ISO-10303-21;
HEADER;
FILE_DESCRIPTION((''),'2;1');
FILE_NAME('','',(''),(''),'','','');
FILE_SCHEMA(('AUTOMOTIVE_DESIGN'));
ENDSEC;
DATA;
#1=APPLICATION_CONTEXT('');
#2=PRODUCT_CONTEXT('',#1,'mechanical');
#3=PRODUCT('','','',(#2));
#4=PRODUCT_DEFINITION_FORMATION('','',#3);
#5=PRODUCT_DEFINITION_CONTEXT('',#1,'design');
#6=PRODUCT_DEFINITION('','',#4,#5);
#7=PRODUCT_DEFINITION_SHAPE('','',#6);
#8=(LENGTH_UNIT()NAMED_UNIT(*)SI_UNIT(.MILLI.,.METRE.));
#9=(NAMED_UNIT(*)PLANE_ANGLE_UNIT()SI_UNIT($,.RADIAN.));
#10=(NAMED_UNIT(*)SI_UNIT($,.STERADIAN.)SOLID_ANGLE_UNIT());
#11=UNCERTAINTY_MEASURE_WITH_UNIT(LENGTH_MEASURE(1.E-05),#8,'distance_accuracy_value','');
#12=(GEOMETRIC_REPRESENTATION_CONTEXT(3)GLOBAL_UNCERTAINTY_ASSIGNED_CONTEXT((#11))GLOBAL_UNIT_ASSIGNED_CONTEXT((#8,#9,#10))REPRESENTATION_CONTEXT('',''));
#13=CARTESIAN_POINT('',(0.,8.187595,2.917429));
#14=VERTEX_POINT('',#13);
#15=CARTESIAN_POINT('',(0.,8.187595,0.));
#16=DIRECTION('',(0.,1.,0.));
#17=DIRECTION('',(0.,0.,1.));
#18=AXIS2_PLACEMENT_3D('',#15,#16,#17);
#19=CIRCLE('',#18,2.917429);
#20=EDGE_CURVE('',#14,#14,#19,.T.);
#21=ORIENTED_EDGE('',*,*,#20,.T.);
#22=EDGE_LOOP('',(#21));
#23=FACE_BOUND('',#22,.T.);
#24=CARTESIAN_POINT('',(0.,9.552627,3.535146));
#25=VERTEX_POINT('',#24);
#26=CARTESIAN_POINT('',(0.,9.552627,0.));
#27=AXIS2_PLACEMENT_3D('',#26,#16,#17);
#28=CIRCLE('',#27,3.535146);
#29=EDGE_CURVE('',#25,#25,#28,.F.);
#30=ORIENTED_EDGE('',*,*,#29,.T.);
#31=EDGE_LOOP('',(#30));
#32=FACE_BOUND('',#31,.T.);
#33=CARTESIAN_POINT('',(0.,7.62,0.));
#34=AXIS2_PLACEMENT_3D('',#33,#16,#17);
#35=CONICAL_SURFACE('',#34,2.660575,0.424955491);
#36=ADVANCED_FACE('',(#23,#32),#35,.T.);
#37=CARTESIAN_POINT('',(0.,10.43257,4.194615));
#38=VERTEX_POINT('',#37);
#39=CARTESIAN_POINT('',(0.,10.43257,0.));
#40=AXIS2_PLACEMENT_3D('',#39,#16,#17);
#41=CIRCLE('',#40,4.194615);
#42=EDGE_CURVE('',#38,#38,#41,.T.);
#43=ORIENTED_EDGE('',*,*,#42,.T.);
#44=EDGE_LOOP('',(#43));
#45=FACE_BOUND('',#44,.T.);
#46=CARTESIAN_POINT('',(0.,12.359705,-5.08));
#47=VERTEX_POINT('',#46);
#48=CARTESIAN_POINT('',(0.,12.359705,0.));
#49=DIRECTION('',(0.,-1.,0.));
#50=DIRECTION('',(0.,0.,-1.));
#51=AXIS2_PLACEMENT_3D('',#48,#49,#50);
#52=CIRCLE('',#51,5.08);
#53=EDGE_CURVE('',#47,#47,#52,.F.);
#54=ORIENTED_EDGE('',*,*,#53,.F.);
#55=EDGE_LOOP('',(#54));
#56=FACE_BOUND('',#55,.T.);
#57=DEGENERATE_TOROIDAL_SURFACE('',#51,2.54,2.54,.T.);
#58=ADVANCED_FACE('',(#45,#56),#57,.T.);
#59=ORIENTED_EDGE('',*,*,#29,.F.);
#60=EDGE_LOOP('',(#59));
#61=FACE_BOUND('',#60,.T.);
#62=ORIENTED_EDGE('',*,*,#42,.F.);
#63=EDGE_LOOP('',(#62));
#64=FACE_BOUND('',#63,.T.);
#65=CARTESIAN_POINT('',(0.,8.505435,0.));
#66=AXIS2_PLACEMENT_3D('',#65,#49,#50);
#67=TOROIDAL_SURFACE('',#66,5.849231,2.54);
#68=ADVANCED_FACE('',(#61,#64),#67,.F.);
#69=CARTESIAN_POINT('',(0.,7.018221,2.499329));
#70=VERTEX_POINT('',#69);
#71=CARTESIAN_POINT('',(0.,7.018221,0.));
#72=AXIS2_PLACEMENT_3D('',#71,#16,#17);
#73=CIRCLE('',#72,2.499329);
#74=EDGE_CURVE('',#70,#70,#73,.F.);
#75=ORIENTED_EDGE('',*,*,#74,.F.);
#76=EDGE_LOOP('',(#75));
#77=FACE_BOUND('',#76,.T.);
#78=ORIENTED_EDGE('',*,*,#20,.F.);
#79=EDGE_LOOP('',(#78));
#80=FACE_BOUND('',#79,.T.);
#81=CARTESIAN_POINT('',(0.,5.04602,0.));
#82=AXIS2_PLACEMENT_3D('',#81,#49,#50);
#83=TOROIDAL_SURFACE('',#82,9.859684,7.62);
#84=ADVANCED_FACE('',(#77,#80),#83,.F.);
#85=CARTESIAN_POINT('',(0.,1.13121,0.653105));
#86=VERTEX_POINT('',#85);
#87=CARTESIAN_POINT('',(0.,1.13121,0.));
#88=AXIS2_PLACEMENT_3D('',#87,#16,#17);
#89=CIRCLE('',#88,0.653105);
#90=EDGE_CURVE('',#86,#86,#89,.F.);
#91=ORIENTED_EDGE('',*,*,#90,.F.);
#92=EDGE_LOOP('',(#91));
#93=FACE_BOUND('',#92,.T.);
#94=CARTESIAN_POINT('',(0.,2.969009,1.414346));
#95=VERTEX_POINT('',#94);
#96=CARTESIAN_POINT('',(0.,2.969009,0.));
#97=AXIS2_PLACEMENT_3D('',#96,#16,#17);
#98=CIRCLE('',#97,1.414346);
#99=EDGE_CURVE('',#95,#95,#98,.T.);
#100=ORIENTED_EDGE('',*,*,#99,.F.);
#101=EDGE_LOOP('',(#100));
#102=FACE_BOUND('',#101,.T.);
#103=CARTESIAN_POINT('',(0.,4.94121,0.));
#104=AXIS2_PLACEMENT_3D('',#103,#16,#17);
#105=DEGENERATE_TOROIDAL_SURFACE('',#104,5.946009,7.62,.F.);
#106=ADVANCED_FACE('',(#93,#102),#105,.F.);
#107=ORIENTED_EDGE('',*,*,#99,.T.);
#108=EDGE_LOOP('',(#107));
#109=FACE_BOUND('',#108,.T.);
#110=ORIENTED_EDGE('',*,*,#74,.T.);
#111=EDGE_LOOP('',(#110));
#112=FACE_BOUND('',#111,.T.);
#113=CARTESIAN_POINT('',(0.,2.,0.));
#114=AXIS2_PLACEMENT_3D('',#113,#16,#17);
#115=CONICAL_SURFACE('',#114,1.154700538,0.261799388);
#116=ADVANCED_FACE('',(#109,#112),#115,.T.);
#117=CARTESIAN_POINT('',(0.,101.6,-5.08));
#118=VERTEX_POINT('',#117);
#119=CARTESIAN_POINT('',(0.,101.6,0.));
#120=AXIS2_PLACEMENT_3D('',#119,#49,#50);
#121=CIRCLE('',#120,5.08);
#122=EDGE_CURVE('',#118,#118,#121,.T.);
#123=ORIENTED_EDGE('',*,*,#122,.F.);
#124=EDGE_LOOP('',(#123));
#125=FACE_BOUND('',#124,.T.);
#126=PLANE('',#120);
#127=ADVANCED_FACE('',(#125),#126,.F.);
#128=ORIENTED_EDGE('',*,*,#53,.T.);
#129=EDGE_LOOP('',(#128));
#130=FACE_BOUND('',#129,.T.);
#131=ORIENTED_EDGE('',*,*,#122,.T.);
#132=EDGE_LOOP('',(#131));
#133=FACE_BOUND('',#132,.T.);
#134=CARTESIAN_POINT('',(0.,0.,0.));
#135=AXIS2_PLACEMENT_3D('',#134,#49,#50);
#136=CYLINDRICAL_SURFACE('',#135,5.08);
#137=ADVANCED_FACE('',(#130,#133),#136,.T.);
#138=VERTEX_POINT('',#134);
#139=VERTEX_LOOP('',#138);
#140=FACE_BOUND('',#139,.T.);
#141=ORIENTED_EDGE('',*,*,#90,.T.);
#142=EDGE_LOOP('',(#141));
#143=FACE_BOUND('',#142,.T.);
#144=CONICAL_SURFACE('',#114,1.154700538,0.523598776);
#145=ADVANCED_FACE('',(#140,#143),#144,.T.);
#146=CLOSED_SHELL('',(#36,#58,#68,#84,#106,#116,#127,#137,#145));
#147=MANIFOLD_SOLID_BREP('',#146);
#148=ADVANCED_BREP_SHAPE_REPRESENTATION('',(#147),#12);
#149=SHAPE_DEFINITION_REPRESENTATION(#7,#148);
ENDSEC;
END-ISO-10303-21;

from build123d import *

# Parameters (mm, degrees)
FILLET1_R = 2.54
FILLET2_R = 2.54
FILLET3_R = 7.62


with BuildPart() as part:
    # Sketch1 → Revolve1 (revolve)
    with BuildSketch(Plane.XY, mode=Mode.PRIVATE) as revolve1_sk:
        Polygon((0, 0), (1.154700538, 2), (2.660575, 7.62), (3.81, 10.16), (5.08, 10.16), (5.08, 101.6), (0, 101.6), align=None)
    revolve(revolve1_sk.sketch.rotate(Axis((0, 0, 0), (0, 1, 0)), 90), axis=Axis((0, 0, 0), (0, 1, 0)))

    # Fillet1
    # the kernel refuses this fillet: 2.54 mm, written as the material it takes off along each edge
    with BuildSketch(Plane(origin=(0, 10.16, 0), x_dir=(0, 0, -1), z_dir=(1, 0, 0))) as fillet1_piece_1:
        with BuildLine():
            CenterArc((2.54, 2.199704526), FILLET1_R, 300, 60)
            Line((5.08, 2.199704526), (5.1308, 2.199704526))
            Line((5.1308, 2.199704526), (5.1308, 0))
            Line((5.1308, 0), (5.08, -0.0508))
            ThreePointArc((5.08, -0.0508), (4.445, -0.0508), (3.8354, -0.043994091))
            Line((3.8354, -0.043994091), (3.81, 0))
        make_face()
    revolve(axis=Axis((0, 10.16, 0), (0, 1, 0)), mode=Mode.SUBTRACT)

    # Fillet2
    fillet2_edges = [part.edges().sort_by_distance(p)[0] for p in [
        (0, 10.16, 3.81),
    ]]
    fillet(fillet2_edges, radius=FILLET2_R)

    # Fillet3
    fillet3_edges = [part.edges().sort_by_distance(p)[0] for p in [
        (0, 7.62, 2.660575),
        (0, 2, 1.154700538),
    ]]
    fillet(fillet3_edges, radius=FILLET3_R)


solid = part.part
